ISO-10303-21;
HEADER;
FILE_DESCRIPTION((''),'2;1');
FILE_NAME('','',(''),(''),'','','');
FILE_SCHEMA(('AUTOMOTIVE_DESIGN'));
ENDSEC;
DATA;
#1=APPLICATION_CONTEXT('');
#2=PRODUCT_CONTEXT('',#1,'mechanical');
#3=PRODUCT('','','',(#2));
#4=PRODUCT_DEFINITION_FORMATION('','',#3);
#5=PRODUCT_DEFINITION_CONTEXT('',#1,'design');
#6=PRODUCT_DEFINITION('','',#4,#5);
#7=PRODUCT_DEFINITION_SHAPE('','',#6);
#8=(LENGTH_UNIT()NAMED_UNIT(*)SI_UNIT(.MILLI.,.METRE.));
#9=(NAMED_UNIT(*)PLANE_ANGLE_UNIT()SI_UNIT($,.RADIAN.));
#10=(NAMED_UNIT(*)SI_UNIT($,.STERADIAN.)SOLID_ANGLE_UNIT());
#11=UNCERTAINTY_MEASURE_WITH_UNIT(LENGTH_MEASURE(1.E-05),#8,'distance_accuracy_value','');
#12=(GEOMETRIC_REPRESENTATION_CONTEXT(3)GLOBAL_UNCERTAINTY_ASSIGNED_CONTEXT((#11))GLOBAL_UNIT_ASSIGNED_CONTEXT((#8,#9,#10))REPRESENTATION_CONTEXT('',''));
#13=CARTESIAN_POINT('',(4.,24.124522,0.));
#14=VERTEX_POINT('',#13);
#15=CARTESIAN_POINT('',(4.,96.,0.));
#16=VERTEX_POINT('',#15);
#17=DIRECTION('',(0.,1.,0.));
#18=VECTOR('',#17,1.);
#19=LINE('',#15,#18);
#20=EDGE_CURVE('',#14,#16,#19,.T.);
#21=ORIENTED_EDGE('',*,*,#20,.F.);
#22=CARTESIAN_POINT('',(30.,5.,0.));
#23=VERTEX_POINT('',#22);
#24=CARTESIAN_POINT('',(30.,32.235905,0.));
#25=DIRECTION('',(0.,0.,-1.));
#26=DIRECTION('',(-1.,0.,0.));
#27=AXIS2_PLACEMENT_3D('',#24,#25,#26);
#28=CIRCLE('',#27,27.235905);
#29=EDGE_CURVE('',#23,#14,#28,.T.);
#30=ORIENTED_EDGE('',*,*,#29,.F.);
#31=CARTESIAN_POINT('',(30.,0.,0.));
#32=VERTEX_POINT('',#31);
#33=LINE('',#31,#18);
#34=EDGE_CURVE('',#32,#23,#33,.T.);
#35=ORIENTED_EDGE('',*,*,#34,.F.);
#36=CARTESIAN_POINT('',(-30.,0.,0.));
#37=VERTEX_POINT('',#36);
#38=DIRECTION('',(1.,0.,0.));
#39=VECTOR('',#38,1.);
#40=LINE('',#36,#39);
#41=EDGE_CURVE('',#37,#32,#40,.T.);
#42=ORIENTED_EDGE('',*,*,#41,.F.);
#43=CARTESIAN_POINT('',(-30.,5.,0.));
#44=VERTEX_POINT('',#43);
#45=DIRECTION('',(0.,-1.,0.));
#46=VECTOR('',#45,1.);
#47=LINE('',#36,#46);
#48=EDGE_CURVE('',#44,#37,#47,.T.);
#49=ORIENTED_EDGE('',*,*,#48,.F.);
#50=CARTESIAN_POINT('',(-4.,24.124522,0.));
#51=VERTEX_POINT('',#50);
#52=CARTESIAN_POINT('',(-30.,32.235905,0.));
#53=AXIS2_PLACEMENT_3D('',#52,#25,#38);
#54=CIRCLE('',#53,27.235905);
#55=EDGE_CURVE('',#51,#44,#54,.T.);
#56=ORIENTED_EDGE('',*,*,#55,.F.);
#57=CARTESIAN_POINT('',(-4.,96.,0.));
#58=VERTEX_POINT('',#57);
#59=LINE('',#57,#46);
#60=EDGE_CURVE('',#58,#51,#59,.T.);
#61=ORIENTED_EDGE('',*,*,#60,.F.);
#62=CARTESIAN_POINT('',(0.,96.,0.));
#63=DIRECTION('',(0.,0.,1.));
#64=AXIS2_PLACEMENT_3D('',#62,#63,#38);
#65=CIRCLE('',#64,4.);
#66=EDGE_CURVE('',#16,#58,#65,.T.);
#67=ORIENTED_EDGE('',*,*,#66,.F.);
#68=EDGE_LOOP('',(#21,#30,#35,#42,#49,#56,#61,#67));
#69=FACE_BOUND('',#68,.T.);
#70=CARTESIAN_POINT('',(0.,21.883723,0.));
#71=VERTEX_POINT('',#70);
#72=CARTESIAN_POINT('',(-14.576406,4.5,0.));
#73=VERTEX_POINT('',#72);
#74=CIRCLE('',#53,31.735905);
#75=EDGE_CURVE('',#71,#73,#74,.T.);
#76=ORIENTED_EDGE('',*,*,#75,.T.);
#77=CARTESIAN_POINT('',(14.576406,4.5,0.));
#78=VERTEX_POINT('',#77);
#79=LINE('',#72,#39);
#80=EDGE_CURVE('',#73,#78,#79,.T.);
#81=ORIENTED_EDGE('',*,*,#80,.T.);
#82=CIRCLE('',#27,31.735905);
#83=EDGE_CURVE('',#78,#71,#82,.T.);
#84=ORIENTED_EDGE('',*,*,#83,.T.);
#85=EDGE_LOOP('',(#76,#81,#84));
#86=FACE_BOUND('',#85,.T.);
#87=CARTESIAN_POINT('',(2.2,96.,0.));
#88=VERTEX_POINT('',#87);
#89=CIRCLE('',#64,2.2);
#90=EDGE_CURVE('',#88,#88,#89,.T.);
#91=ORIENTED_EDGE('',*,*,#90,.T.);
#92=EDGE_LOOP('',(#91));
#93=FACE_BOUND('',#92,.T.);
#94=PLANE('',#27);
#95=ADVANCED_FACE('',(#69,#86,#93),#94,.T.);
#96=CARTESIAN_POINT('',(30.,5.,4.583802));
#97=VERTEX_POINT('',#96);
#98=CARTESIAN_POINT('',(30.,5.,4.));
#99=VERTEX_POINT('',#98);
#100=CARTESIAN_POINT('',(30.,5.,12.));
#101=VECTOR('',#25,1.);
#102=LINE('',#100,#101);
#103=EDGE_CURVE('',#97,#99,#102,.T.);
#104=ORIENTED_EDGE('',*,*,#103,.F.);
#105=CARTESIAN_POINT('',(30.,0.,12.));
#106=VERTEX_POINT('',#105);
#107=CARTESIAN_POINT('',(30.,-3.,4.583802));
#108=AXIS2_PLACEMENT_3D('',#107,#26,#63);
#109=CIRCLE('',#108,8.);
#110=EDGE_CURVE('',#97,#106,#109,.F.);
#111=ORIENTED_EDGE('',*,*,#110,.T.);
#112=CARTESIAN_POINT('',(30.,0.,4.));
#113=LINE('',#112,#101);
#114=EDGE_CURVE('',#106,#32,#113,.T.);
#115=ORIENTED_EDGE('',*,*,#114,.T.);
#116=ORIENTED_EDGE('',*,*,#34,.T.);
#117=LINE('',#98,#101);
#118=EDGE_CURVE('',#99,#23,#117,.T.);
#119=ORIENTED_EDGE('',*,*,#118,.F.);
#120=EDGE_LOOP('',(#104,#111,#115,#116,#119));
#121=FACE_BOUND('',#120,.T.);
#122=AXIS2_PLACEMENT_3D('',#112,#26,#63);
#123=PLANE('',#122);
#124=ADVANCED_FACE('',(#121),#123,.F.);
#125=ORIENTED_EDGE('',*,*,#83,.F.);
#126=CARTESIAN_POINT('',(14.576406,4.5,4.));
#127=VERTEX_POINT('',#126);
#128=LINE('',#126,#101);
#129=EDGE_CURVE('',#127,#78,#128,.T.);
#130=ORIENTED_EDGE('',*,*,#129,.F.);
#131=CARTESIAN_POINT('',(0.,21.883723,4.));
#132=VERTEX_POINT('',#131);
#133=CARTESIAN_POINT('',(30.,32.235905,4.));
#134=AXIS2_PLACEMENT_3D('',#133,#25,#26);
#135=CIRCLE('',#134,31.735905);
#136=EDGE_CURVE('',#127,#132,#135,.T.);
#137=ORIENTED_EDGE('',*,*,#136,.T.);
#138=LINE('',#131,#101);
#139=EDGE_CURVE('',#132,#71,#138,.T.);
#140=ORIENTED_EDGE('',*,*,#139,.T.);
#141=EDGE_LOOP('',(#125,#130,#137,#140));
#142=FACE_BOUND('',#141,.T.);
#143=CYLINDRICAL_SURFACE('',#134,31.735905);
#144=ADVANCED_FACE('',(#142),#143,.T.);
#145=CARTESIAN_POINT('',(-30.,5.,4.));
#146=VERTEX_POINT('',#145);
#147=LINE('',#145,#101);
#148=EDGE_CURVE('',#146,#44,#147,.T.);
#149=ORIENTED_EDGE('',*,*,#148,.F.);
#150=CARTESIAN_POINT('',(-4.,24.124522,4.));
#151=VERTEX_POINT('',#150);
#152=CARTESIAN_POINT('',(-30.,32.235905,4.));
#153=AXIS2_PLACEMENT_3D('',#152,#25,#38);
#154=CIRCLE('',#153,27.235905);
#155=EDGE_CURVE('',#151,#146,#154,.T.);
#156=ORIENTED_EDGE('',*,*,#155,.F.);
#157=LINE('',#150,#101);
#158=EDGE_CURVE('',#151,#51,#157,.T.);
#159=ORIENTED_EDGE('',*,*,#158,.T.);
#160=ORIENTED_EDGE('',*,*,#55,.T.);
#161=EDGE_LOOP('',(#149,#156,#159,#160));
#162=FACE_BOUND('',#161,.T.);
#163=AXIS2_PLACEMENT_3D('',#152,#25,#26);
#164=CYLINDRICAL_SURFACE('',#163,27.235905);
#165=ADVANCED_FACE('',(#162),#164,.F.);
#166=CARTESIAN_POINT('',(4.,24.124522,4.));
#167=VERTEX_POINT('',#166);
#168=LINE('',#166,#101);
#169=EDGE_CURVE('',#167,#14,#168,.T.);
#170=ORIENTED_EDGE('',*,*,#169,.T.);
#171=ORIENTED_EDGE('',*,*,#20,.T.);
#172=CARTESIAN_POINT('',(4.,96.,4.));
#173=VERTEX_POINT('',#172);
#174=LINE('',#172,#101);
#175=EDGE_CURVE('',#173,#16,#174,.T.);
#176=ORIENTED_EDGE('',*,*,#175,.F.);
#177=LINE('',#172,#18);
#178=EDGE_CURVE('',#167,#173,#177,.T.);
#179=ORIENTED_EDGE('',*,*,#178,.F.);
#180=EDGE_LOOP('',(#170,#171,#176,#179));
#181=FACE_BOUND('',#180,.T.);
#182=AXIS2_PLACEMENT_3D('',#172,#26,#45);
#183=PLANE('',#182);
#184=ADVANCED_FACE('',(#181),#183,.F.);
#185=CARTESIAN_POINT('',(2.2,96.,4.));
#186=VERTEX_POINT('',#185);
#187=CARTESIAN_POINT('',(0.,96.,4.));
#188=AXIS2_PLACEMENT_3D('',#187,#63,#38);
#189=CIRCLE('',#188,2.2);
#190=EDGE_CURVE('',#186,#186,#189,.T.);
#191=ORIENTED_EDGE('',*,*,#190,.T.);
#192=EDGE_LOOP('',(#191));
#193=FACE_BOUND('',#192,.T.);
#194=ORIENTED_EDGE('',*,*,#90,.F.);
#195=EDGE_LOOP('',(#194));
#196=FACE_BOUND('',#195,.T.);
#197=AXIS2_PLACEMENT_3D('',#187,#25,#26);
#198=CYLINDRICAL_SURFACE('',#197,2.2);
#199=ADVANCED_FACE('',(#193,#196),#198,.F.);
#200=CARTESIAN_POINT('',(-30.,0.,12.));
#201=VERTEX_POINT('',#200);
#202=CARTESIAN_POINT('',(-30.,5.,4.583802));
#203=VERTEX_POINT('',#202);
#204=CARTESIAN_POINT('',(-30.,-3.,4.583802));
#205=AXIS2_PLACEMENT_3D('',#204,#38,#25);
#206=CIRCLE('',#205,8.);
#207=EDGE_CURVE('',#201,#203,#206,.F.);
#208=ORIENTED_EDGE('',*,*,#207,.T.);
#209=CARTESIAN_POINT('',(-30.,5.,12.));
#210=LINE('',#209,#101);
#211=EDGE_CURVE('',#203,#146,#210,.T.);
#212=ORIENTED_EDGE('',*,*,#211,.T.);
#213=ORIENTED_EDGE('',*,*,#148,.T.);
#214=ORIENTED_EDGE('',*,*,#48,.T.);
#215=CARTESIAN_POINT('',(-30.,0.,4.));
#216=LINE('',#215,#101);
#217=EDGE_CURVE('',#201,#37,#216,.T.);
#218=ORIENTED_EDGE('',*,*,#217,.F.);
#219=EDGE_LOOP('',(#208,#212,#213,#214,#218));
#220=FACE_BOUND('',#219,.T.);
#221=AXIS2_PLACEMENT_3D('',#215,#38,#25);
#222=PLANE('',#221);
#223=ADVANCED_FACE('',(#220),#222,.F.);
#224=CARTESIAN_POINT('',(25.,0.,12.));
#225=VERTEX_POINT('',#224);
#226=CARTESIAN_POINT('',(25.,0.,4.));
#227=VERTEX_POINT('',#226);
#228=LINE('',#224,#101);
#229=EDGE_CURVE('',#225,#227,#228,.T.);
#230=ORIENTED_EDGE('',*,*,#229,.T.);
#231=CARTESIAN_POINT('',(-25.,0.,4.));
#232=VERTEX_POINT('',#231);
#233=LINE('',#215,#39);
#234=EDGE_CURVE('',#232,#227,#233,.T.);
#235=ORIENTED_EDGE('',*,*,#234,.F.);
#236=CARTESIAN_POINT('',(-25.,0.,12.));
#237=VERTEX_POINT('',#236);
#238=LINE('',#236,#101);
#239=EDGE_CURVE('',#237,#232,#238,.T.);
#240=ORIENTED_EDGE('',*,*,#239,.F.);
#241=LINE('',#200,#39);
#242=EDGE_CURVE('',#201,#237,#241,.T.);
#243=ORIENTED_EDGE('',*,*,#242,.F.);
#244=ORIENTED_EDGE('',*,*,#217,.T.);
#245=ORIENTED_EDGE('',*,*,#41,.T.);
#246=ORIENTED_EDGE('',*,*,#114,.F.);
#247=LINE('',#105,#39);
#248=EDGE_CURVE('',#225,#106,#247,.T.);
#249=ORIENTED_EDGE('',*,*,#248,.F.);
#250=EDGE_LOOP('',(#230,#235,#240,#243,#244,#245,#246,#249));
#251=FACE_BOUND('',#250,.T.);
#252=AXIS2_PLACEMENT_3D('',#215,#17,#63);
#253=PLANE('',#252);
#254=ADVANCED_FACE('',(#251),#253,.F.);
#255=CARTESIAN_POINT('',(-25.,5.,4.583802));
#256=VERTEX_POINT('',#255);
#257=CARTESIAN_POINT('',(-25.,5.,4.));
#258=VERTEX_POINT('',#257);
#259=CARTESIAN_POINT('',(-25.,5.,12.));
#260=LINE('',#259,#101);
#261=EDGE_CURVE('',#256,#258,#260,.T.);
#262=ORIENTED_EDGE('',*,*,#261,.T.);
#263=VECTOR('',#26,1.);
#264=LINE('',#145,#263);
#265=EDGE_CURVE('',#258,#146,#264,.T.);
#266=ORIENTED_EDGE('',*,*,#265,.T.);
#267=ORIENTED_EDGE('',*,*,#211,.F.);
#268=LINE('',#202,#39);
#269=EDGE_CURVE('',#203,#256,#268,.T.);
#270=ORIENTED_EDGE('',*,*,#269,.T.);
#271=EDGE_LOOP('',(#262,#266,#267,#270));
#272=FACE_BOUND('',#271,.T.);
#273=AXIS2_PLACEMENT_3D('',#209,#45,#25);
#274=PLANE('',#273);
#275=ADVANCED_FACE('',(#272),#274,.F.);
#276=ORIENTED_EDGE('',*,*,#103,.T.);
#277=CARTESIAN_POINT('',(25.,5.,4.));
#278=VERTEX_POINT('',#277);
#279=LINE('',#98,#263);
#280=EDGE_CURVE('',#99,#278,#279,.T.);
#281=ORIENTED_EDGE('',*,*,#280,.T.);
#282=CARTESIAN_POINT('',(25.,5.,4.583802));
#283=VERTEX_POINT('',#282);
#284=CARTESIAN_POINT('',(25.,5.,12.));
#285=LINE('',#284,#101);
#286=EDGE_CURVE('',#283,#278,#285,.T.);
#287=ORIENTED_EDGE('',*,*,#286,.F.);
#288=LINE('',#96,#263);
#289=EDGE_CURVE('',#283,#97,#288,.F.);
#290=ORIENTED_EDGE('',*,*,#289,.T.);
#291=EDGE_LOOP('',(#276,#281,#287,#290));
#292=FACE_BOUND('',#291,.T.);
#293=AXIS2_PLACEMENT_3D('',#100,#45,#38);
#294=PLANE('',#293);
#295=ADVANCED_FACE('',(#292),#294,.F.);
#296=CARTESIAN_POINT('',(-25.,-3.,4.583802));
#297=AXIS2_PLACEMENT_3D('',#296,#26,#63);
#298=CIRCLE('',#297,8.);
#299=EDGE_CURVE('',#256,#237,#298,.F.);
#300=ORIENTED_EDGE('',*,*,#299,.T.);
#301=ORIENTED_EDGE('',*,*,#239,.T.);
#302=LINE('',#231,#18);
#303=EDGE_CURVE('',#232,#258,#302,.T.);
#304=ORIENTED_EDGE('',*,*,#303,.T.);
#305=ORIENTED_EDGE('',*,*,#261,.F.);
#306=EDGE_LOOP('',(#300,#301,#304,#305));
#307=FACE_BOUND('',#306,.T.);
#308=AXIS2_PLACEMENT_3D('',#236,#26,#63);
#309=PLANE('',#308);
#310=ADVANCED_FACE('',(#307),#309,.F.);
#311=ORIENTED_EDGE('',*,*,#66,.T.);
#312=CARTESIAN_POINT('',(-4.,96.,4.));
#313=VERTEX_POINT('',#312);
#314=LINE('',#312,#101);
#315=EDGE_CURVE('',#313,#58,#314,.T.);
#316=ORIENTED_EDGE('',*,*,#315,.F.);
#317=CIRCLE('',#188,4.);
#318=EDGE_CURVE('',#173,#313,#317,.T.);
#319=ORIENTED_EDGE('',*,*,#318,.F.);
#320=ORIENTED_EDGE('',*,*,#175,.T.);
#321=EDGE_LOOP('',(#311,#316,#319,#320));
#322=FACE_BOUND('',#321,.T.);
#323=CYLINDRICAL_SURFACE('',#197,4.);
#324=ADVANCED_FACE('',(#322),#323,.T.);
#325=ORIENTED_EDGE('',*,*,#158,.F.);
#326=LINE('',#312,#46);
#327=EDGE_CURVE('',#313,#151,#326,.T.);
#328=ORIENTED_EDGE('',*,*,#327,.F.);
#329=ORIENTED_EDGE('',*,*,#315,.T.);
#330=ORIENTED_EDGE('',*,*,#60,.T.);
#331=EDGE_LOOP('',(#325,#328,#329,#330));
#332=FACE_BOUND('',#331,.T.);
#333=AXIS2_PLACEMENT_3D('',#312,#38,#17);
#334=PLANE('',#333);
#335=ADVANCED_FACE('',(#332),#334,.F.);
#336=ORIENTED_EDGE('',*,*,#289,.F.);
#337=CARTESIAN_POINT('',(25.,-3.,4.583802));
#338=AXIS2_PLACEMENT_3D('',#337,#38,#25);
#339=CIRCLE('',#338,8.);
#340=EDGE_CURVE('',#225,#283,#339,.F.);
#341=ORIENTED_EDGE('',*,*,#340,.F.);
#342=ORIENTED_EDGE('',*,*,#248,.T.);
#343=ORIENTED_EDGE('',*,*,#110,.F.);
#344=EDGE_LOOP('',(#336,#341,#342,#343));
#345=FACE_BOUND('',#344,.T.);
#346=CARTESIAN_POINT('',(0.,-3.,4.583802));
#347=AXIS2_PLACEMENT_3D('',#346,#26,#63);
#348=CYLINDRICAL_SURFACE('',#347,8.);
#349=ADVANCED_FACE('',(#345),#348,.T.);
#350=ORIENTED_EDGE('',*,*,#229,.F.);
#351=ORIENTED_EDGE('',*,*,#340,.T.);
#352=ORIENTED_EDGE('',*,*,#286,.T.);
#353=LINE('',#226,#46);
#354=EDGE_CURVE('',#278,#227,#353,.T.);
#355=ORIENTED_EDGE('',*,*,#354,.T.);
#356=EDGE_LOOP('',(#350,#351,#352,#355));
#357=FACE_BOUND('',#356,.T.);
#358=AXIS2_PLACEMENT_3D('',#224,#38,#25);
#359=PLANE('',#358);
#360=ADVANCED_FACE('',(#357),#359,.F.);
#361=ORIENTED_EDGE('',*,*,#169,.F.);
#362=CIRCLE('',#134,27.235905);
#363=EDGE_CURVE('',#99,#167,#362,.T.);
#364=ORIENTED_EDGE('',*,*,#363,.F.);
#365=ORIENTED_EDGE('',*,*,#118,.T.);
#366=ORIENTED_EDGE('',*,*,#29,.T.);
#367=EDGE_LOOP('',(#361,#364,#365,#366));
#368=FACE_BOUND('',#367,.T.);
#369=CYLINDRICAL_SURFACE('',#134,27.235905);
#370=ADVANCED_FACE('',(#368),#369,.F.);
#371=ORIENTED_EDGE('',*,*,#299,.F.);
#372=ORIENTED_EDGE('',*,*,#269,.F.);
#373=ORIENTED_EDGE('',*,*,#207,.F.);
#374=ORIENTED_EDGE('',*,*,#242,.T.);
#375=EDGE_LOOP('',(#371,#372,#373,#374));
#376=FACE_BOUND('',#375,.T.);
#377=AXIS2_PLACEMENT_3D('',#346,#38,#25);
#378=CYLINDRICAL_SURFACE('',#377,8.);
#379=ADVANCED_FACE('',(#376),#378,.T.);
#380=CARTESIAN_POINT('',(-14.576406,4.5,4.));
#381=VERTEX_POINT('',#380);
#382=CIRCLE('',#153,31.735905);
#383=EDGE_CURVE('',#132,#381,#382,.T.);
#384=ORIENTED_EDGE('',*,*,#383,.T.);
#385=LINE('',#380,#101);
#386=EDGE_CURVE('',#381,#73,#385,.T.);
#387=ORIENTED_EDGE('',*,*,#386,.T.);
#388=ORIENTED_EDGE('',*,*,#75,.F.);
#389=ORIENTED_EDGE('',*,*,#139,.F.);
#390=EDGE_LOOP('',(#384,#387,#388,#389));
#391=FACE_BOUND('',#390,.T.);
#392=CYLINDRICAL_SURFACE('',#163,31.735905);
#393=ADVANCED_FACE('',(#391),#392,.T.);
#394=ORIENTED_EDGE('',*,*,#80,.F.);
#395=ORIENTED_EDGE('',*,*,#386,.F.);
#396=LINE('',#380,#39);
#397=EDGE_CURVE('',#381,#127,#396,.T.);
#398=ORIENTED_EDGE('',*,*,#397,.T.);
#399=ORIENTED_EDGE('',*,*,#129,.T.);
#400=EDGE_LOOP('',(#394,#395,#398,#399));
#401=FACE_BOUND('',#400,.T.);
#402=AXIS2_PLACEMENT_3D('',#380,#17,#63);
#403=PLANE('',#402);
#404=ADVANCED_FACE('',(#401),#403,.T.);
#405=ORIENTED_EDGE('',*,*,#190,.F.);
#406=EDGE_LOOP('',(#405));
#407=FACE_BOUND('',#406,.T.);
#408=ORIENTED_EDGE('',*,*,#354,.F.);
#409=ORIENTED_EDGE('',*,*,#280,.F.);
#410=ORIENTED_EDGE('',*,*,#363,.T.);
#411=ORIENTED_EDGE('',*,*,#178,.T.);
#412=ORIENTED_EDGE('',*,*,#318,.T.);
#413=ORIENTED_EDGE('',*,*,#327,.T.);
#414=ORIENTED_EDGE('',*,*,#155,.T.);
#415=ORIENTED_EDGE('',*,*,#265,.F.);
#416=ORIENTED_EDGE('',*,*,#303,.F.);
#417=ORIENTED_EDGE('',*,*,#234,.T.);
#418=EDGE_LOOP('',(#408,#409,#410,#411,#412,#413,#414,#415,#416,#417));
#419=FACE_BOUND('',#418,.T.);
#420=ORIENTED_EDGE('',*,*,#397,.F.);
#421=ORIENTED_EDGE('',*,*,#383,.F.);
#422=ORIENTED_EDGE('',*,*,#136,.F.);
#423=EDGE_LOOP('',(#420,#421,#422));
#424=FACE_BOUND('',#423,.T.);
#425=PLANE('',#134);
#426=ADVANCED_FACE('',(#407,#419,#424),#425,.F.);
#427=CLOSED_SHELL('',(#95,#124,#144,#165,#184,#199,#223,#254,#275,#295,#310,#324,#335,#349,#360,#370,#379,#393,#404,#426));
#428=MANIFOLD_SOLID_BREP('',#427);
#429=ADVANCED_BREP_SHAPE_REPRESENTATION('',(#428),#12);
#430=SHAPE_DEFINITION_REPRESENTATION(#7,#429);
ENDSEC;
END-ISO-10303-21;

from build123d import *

# Parameters (mm, degrees)
SKETCH1_R           = 2.2
BOSS_EXTRUDE1_DEPTH = 4
SKETCH2_W           = 5
SKETCH2_H           = 5
BOSS_EXTRUDE2_DEPTH = 8
FILLET1_R           = 8


with BuildPart() as part:
    # Sketch1 → Boss-Extrude1 (new body)
    with BuildSketch(Plane.XY):
        with BuildLine():
            Line((-30, 0), (30, 0))
            Line((30, 0), (30, 5))
            ThreePointArc((30, 5), (13.861944355, 10.296039854), (4, 24.124522477))
            Line((4, 24.124522477), (4, 96))
            ThreePointArc((4, 96), (0, 100), (-4, 96))
            Line((-4, 96), (-4, 24.124522477))
            ThreePointArc((-4, 24.124522477), (-13.861944355, 10.296039854), (-30, 5))
            Line((-30, 5), (-30, 0))
        make_face()
        with Locations((0, 96)):
            Circle(SKETCH1_R, mode=Mode.SUBTRACT)
        with BuildLine():
            Line((-14.576406349, 4.5), (14.576406349, 4.5))
            ThreePointArc((14.576406349, 4.5), (5.681813978, 11.844889874), (0, 21.883723005))
            ThreePointArc((0, 21.883723005), (-5.681813978, 11.844889874), (-14.576406349, 4.5))
        make_face(mode=Mode.SUBTRACT)
    extrude(amount=BOSS_EXTRUDE1_DEPTH)

    # Sketch2 → Boss-Extrude2 (add)
    with BuildSketch(Plane.XY.offset(4)):
        with Locations((27.5, 2.5)):
            Rectangle(SKETCH2_W, SKETCH2_H)
        with Locations((-27.5, 2.5)):
            Rectangle(SKETCH2_W, SKETCH2_H)
    extrude(amount=BOSS_EXTRUDE2_DEPTH)

    # Fillet1
    # the kernel refuses this fillet: 8 mm, written as the material it takes off along each edge
    with BuildSketch(Plane(origin=(6.459503782, 5, 12), x_dir=(0, -1, 0), z_dir=(1, 0, 0))) as fillet1_piece_1:
        with BuildLine():
            CenterArc((8, 7.416198487), FILLET1_R, 180, 67.975687163)
            Line((0, 7.416198487), (-0.16, 7.416198487))
            Line((-0.16, 7.416198487), (-0.16, 0))
            Line((-0.16, 0), (0, -0.16))
            ThreePointArc((0, -0.16), (2.5, -0.16), (4.94, -0.14832397))
            Line((4.94, -0.14832397), (5, 0))
        make_face()
    extrude(amount=42.080992435, mode=Mode.SUBTRACT)
    with BuildSketch(Plane(origin=(-6.459503782, 5, 12), x_dir=(0, 0, -1), z_dir=(-1, 0, 0))) as fillet1_piece_2:
        with BuildLine():
            CenterArc((7.416198487, 8), FILLET1_R, 202.024312837, 67.975687163)
            Line((0, 5), (-0.14832397, 4.94))
            ThreePointArc((-0.14832397, 4.94), (-0.16, 2.5), (-0.16, 0))
            Line((-0.16, 0), (0, -0.16))
            Line((0, -0.16), (7.416198487, -0.16))
            Line((7.416198487, -0.16), (7.416198487, 0))
        make_face()
    extrude(amount=42.080992435, mode=Mode.SUBTRACT)


solid = part.part
